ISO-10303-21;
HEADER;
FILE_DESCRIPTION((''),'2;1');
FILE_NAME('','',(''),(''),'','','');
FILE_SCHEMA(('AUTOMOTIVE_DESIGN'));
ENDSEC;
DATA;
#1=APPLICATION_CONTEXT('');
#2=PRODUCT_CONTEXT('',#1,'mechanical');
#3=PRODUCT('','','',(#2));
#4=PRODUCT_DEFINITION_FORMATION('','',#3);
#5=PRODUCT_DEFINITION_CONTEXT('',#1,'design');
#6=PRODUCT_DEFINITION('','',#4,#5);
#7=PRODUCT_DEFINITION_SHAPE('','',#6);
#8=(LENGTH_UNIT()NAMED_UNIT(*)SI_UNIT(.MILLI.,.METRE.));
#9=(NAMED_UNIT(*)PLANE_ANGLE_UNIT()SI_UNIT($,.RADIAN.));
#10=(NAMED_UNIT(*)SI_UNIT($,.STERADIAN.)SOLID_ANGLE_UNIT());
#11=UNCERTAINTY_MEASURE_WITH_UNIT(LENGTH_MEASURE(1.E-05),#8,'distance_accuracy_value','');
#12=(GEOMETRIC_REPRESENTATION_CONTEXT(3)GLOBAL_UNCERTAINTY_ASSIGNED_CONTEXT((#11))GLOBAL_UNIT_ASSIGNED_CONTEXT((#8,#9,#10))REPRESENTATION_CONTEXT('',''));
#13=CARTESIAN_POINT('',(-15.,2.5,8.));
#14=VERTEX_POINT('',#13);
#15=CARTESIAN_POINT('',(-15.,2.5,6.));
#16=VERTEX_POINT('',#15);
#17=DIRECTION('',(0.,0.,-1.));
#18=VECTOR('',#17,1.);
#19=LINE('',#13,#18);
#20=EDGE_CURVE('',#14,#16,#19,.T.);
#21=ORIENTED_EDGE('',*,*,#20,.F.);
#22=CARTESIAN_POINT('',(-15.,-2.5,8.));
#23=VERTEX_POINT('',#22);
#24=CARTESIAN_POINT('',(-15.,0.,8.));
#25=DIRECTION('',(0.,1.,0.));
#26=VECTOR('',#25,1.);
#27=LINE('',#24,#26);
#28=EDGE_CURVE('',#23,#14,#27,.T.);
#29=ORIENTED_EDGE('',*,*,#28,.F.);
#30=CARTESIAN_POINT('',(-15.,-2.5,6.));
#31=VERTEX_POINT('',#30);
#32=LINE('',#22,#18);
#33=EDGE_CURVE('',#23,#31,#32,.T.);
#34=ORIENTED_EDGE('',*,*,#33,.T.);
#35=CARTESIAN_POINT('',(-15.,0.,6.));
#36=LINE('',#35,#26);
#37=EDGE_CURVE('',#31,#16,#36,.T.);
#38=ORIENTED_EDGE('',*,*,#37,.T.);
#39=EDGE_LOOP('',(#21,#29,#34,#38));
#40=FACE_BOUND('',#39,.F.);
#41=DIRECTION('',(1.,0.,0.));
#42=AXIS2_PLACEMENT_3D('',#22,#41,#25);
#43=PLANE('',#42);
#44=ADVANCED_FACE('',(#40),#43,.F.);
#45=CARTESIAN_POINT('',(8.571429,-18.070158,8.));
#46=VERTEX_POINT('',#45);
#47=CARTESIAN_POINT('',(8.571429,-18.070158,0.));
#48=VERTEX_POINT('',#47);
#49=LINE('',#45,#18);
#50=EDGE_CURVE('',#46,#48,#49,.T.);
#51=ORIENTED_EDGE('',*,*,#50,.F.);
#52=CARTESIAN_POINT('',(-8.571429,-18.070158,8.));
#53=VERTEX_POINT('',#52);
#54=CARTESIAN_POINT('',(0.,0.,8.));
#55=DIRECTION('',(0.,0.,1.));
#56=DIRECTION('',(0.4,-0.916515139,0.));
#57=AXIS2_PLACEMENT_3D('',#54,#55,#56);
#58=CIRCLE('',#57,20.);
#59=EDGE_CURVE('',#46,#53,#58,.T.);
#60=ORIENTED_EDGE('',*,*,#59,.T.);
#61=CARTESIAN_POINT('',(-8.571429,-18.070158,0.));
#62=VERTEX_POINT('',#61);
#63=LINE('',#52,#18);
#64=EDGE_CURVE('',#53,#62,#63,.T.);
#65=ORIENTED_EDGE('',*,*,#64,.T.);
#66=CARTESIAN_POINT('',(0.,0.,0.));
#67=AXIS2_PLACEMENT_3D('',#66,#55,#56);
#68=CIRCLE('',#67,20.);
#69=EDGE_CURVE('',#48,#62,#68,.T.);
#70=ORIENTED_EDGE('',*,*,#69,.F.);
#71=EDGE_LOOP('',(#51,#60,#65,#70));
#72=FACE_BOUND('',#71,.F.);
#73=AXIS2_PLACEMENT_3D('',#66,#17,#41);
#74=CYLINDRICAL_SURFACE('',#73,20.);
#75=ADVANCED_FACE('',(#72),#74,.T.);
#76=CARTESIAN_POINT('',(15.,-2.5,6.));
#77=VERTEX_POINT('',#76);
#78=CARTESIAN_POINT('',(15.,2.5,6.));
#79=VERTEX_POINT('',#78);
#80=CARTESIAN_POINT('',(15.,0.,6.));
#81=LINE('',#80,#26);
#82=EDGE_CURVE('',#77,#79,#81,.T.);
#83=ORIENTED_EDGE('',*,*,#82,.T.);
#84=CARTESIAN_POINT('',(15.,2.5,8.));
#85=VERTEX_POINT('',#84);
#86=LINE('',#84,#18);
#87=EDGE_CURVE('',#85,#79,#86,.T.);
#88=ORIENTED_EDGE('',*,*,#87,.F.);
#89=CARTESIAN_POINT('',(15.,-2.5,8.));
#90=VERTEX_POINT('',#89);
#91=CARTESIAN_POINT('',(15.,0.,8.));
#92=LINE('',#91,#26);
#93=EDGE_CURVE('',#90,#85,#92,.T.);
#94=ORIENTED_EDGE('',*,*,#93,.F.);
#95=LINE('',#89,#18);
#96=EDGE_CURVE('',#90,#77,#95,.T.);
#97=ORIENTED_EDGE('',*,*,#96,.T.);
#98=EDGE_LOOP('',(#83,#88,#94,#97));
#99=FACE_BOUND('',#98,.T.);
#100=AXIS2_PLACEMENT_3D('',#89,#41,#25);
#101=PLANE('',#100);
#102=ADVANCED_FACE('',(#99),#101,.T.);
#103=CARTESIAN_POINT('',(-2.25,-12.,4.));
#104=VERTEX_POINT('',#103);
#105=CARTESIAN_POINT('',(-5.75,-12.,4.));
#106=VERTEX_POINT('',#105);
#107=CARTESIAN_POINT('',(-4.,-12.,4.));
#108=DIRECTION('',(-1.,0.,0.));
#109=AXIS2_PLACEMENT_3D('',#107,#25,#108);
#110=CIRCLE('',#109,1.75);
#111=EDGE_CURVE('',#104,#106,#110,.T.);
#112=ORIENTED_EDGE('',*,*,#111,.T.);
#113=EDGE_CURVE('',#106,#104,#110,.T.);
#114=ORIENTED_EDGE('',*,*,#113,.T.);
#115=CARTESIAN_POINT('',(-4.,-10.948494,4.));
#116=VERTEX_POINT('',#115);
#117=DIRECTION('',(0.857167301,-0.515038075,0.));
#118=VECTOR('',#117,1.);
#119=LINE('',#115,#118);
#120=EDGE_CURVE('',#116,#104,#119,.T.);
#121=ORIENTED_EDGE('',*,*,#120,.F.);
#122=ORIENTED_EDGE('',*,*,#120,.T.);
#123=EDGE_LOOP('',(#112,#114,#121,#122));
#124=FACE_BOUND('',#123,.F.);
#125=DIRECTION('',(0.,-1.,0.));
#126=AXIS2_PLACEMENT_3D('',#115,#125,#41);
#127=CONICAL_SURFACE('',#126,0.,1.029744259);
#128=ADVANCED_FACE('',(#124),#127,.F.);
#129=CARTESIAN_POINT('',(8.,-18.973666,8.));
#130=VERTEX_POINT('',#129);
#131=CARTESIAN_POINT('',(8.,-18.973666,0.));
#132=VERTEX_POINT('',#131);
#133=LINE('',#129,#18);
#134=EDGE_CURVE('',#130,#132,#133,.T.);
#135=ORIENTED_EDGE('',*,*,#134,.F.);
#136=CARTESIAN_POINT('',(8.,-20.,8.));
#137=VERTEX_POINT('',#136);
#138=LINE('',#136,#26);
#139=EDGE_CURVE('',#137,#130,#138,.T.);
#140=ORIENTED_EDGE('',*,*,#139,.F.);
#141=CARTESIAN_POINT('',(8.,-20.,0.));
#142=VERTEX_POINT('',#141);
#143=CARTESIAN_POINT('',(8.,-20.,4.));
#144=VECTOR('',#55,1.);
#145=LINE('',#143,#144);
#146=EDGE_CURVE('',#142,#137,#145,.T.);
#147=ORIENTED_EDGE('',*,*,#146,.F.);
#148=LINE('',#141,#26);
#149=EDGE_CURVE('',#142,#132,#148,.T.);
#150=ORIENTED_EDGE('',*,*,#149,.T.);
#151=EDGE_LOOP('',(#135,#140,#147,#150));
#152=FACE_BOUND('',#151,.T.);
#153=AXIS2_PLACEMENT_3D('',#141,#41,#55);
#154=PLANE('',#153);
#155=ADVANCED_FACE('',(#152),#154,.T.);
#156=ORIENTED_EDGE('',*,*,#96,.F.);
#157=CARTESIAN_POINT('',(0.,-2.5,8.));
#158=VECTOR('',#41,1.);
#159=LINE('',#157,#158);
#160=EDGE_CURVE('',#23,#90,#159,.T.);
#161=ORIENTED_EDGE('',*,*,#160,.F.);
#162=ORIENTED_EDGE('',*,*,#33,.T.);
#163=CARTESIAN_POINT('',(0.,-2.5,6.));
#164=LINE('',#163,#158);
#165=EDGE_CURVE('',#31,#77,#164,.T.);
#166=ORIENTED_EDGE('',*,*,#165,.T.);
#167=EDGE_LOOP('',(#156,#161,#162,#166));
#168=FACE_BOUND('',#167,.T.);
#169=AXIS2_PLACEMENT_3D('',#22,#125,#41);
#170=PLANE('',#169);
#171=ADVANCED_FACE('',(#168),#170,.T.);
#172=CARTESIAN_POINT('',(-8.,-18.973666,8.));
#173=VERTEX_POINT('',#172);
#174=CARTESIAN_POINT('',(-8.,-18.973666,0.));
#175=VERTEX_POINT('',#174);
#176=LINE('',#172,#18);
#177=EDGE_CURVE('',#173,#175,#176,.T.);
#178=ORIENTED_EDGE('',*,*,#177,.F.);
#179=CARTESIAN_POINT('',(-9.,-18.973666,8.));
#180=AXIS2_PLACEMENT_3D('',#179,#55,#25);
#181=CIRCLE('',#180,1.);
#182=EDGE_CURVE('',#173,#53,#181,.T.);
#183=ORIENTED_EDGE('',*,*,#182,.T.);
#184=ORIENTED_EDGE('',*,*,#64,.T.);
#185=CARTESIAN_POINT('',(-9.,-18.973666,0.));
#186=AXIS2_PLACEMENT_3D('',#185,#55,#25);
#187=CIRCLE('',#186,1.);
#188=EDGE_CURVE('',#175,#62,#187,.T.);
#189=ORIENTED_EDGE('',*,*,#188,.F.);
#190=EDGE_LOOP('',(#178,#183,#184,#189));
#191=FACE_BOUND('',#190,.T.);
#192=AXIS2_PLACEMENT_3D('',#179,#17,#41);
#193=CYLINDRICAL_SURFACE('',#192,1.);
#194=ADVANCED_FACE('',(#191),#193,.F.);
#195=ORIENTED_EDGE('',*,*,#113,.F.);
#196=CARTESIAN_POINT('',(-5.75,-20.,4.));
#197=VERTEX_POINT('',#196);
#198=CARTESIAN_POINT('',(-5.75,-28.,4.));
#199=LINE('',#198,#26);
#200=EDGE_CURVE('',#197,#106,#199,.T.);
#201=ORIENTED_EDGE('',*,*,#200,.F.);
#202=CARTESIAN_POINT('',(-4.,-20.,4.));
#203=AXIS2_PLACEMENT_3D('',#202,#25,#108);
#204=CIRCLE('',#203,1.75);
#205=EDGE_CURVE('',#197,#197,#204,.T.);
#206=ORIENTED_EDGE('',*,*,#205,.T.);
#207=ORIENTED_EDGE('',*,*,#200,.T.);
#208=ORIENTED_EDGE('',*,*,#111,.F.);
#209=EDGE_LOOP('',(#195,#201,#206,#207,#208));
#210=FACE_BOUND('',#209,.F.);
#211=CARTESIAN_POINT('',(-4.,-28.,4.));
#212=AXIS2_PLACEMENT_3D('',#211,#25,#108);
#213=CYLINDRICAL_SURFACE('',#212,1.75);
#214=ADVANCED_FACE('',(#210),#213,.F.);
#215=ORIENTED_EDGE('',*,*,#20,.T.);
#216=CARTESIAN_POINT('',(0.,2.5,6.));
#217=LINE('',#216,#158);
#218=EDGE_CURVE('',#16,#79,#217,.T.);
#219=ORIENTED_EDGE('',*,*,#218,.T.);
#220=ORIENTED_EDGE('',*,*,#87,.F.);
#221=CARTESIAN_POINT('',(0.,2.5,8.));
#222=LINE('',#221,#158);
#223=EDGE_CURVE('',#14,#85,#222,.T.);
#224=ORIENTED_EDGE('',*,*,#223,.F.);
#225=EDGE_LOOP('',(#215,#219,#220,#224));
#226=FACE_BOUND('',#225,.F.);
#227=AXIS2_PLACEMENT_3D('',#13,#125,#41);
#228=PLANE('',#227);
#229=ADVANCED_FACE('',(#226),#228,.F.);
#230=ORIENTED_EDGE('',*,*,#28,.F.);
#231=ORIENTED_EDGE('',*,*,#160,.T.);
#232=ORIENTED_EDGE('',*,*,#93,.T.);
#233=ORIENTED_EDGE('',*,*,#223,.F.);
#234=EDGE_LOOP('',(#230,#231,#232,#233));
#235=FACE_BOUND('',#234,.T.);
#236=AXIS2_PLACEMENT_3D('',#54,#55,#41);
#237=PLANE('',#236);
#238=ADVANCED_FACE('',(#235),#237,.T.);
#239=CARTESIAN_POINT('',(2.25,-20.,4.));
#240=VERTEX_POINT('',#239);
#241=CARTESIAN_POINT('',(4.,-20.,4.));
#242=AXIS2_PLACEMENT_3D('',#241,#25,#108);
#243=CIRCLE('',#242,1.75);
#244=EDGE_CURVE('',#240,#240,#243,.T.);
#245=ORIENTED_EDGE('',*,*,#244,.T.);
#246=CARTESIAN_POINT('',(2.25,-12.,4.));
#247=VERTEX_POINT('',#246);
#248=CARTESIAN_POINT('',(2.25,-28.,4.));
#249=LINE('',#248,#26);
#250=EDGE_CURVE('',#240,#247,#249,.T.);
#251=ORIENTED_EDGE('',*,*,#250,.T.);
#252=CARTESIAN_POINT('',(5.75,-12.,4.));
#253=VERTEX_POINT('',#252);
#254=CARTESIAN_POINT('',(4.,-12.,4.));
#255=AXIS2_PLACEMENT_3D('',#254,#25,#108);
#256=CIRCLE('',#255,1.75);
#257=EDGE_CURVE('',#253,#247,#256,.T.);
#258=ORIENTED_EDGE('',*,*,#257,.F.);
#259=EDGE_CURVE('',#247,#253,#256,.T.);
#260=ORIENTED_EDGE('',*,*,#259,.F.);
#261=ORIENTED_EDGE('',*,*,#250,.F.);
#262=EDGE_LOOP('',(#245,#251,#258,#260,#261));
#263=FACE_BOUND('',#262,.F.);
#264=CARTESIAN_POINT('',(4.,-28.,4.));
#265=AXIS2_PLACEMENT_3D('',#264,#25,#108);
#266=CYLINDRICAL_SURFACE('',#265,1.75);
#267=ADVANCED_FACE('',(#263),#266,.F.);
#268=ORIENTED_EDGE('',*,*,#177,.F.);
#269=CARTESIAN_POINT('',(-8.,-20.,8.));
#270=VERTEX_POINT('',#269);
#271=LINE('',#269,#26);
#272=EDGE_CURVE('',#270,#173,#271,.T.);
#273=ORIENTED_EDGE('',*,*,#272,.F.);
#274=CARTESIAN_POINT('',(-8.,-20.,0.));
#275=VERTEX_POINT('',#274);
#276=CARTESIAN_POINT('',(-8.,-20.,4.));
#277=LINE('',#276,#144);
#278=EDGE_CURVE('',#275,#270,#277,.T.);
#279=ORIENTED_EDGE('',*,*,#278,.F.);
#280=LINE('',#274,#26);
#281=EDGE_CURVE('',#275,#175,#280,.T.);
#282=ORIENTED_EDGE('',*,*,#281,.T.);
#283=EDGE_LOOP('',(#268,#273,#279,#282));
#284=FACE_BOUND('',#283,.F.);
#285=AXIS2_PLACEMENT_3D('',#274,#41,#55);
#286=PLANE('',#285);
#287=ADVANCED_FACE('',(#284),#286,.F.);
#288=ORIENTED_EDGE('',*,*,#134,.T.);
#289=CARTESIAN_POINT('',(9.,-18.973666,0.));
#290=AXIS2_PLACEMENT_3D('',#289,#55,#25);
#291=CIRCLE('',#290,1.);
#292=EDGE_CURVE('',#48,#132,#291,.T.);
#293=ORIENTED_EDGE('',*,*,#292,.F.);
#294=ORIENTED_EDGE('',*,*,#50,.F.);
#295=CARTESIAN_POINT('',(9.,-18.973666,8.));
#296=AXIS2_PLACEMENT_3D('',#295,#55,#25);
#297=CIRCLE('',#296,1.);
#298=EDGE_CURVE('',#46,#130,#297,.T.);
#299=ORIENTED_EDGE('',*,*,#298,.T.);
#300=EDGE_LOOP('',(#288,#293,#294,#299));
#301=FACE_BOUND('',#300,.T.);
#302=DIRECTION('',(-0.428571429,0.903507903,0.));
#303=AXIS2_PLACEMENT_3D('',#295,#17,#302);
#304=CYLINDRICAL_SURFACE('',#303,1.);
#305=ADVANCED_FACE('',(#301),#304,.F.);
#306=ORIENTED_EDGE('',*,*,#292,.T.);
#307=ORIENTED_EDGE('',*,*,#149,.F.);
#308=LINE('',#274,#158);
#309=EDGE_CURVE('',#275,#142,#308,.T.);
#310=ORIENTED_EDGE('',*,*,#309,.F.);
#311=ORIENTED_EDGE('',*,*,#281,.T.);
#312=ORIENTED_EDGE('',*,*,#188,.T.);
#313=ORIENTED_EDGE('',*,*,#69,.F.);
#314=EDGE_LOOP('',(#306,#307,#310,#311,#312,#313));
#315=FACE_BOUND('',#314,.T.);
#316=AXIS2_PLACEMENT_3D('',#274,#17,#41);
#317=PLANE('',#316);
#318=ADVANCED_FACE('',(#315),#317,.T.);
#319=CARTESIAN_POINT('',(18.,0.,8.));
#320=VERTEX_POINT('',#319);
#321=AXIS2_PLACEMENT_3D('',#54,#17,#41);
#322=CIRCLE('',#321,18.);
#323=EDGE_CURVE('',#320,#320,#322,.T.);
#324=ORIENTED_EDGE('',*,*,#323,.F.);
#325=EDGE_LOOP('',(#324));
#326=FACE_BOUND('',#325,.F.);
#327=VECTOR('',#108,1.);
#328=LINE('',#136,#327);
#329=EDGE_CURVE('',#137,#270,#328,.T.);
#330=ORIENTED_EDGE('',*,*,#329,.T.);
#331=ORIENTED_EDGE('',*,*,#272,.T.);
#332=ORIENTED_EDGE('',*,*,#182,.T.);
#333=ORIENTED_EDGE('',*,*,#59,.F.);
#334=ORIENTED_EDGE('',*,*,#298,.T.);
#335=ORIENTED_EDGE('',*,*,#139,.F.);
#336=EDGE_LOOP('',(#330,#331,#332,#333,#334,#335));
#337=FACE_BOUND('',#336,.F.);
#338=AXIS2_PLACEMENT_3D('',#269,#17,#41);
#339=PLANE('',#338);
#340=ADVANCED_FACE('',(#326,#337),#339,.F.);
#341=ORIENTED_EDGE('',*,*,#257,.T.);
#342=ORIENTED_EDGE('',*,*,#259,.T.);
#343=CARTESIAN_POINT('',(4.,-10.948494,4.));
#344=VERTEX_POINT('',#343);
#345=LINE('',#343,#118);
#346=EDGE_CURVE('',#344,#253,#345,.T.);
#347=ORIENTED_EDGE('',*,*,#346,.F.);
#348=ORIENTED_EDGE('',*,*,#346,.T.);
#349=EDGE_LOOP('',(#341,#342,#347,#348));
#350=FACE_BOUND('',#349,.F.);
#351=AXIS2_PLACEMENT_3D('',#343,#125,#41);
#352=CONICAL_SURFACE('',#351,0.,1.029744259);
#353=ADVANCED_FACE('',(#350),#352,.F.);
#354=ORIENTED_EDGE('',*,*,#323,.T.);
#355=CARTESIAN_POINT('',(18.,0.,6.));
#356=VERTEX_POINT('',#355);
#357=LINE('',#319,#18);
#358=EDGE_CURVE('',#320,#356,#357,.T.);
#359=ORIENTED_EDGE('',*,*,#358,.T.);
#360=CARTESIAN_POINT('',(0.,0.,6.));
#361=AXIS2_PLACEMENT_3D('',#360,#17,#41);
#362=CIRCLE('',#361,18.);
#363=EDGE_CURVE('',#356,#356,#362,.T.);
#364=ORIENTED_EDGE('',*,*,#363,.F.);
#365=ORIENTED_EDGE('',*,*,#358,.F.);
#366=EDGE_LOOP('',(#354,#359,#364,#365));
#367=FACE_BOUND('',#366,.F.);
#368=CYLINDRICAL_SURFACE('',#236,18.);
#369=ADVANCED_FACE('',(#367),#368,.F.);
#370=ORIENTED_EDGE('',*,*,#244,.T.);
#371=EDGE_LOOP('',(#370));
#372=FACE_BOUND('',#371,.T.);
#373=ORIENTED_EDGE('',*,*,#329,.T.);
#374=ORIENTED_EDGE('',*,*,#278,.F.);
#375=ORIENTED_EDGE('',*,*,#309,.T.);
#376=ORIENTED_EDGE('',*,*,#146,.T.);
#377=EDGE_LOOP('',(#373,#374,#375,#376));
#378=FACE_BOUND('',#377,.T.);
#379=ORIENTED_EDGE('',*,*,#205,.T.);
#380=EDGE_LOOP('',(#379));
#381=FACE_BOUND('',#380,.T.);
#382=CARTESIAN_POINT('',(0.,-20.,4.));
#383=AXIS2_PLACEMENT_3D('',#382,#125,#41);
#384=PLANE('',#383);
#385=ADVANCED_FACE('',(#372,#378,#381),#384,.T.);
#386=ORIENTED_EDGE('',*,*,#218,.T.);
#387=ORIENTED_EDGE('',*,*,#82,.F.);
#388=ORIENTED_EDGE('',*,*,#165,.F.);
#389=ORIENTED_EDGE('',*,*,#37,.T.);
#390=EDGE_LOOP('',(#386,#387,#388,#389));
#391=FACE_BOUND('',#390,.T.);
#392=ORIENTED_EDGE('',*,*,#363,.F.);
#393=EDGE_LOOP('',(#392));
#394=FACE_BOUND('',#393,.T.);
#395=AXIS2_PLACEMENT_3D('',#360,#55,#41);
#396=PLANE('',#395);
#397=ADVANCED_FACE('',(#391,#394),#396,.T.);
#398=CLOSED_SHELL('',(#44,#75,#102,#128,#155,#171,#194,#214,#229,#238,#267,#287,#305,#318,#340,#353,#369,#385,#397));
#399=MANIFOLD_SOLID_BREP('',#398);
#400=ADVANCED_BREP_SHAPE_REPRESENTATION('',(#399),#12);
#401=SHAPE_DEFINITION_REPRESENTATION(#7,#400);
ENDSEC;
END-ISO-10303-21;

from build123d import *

# Parameters (mm, degrees)
F0_R          = 20
F1_DEPTH      = 8
F2_R          = 18
F2_W          = 30
F2_H          = 5
F3_DEPTH      = 2
F6_END_RADIUS = 18
F5_W          = 16
F5_H          = 8
F6_REACH      = 57.88954382
F7_D          = 3.5
F7_DEPTH      = 8
F7_TIP        = 1.0515060833
F8_R          = 1


with BuildPart() as f1:
    # F0 (on Top) → F1 (new body)
    with BuildSketch(Plane.XY):
        Circle(F0_R)
    extrude(amount=F1_DEPTH)

    # F2 (on face) → F3 (cut)
    with BuildSketch(Plane.XY.offset(8)):
        Circle(F2_R)
        Rectangle(F2_W, F2_H, mode=Mode.SUBTRACT)
    extrude(amount=-F3_DEPTH, mode=Mode.SUBTRACT)

    f6_end = (Plane.XY.offset(7) * Cylinder(F6_END_RADIUS, 230.0419424967, mode=Mode.PRIVATE)).faces().sort_by_distance((-18, 0, 7))[0]
    # F5 (on offset) → F6 (join, up to the whole of a round face its end follows)
    with BuildSketch(Plane.XZ.offset(20)):
        with Locations((0, 4)):
            Rectangle(F5_W, F5_H)
    f6_long = extrude(amount=-F6_REACH, mode=Mode.PRIVATE)
    add(split(f6_long, bisect_by=f6_end, keep=Keep.ALL, mode=Mode.PRIVATE).solids().sort_by_distance((0, -20, 4))[0])

    # F7
    with Locations(Plane.XZ.offset(20)):
        with Locations((4, 4), (-4, 4)):
            Hole(F7_D / 2, depth=F7_DEPTH)
            with Locations((0, 0, -(F7_DEPTH + F7_TIP / 2))):  # 118° drill point
                Cone(0, F7_D / 2, F7_TIP, mode=Mode.SUBTRACT)

    # F8
    f8_edges = [f1.edges().sort_by_distance(p)[0] for p in [
        (8, -18.330303, 4),
        (-8, -18.330303, 4),
    ]]
    fillet(f8_edges, radius=F8_R)


solid = f1.part
